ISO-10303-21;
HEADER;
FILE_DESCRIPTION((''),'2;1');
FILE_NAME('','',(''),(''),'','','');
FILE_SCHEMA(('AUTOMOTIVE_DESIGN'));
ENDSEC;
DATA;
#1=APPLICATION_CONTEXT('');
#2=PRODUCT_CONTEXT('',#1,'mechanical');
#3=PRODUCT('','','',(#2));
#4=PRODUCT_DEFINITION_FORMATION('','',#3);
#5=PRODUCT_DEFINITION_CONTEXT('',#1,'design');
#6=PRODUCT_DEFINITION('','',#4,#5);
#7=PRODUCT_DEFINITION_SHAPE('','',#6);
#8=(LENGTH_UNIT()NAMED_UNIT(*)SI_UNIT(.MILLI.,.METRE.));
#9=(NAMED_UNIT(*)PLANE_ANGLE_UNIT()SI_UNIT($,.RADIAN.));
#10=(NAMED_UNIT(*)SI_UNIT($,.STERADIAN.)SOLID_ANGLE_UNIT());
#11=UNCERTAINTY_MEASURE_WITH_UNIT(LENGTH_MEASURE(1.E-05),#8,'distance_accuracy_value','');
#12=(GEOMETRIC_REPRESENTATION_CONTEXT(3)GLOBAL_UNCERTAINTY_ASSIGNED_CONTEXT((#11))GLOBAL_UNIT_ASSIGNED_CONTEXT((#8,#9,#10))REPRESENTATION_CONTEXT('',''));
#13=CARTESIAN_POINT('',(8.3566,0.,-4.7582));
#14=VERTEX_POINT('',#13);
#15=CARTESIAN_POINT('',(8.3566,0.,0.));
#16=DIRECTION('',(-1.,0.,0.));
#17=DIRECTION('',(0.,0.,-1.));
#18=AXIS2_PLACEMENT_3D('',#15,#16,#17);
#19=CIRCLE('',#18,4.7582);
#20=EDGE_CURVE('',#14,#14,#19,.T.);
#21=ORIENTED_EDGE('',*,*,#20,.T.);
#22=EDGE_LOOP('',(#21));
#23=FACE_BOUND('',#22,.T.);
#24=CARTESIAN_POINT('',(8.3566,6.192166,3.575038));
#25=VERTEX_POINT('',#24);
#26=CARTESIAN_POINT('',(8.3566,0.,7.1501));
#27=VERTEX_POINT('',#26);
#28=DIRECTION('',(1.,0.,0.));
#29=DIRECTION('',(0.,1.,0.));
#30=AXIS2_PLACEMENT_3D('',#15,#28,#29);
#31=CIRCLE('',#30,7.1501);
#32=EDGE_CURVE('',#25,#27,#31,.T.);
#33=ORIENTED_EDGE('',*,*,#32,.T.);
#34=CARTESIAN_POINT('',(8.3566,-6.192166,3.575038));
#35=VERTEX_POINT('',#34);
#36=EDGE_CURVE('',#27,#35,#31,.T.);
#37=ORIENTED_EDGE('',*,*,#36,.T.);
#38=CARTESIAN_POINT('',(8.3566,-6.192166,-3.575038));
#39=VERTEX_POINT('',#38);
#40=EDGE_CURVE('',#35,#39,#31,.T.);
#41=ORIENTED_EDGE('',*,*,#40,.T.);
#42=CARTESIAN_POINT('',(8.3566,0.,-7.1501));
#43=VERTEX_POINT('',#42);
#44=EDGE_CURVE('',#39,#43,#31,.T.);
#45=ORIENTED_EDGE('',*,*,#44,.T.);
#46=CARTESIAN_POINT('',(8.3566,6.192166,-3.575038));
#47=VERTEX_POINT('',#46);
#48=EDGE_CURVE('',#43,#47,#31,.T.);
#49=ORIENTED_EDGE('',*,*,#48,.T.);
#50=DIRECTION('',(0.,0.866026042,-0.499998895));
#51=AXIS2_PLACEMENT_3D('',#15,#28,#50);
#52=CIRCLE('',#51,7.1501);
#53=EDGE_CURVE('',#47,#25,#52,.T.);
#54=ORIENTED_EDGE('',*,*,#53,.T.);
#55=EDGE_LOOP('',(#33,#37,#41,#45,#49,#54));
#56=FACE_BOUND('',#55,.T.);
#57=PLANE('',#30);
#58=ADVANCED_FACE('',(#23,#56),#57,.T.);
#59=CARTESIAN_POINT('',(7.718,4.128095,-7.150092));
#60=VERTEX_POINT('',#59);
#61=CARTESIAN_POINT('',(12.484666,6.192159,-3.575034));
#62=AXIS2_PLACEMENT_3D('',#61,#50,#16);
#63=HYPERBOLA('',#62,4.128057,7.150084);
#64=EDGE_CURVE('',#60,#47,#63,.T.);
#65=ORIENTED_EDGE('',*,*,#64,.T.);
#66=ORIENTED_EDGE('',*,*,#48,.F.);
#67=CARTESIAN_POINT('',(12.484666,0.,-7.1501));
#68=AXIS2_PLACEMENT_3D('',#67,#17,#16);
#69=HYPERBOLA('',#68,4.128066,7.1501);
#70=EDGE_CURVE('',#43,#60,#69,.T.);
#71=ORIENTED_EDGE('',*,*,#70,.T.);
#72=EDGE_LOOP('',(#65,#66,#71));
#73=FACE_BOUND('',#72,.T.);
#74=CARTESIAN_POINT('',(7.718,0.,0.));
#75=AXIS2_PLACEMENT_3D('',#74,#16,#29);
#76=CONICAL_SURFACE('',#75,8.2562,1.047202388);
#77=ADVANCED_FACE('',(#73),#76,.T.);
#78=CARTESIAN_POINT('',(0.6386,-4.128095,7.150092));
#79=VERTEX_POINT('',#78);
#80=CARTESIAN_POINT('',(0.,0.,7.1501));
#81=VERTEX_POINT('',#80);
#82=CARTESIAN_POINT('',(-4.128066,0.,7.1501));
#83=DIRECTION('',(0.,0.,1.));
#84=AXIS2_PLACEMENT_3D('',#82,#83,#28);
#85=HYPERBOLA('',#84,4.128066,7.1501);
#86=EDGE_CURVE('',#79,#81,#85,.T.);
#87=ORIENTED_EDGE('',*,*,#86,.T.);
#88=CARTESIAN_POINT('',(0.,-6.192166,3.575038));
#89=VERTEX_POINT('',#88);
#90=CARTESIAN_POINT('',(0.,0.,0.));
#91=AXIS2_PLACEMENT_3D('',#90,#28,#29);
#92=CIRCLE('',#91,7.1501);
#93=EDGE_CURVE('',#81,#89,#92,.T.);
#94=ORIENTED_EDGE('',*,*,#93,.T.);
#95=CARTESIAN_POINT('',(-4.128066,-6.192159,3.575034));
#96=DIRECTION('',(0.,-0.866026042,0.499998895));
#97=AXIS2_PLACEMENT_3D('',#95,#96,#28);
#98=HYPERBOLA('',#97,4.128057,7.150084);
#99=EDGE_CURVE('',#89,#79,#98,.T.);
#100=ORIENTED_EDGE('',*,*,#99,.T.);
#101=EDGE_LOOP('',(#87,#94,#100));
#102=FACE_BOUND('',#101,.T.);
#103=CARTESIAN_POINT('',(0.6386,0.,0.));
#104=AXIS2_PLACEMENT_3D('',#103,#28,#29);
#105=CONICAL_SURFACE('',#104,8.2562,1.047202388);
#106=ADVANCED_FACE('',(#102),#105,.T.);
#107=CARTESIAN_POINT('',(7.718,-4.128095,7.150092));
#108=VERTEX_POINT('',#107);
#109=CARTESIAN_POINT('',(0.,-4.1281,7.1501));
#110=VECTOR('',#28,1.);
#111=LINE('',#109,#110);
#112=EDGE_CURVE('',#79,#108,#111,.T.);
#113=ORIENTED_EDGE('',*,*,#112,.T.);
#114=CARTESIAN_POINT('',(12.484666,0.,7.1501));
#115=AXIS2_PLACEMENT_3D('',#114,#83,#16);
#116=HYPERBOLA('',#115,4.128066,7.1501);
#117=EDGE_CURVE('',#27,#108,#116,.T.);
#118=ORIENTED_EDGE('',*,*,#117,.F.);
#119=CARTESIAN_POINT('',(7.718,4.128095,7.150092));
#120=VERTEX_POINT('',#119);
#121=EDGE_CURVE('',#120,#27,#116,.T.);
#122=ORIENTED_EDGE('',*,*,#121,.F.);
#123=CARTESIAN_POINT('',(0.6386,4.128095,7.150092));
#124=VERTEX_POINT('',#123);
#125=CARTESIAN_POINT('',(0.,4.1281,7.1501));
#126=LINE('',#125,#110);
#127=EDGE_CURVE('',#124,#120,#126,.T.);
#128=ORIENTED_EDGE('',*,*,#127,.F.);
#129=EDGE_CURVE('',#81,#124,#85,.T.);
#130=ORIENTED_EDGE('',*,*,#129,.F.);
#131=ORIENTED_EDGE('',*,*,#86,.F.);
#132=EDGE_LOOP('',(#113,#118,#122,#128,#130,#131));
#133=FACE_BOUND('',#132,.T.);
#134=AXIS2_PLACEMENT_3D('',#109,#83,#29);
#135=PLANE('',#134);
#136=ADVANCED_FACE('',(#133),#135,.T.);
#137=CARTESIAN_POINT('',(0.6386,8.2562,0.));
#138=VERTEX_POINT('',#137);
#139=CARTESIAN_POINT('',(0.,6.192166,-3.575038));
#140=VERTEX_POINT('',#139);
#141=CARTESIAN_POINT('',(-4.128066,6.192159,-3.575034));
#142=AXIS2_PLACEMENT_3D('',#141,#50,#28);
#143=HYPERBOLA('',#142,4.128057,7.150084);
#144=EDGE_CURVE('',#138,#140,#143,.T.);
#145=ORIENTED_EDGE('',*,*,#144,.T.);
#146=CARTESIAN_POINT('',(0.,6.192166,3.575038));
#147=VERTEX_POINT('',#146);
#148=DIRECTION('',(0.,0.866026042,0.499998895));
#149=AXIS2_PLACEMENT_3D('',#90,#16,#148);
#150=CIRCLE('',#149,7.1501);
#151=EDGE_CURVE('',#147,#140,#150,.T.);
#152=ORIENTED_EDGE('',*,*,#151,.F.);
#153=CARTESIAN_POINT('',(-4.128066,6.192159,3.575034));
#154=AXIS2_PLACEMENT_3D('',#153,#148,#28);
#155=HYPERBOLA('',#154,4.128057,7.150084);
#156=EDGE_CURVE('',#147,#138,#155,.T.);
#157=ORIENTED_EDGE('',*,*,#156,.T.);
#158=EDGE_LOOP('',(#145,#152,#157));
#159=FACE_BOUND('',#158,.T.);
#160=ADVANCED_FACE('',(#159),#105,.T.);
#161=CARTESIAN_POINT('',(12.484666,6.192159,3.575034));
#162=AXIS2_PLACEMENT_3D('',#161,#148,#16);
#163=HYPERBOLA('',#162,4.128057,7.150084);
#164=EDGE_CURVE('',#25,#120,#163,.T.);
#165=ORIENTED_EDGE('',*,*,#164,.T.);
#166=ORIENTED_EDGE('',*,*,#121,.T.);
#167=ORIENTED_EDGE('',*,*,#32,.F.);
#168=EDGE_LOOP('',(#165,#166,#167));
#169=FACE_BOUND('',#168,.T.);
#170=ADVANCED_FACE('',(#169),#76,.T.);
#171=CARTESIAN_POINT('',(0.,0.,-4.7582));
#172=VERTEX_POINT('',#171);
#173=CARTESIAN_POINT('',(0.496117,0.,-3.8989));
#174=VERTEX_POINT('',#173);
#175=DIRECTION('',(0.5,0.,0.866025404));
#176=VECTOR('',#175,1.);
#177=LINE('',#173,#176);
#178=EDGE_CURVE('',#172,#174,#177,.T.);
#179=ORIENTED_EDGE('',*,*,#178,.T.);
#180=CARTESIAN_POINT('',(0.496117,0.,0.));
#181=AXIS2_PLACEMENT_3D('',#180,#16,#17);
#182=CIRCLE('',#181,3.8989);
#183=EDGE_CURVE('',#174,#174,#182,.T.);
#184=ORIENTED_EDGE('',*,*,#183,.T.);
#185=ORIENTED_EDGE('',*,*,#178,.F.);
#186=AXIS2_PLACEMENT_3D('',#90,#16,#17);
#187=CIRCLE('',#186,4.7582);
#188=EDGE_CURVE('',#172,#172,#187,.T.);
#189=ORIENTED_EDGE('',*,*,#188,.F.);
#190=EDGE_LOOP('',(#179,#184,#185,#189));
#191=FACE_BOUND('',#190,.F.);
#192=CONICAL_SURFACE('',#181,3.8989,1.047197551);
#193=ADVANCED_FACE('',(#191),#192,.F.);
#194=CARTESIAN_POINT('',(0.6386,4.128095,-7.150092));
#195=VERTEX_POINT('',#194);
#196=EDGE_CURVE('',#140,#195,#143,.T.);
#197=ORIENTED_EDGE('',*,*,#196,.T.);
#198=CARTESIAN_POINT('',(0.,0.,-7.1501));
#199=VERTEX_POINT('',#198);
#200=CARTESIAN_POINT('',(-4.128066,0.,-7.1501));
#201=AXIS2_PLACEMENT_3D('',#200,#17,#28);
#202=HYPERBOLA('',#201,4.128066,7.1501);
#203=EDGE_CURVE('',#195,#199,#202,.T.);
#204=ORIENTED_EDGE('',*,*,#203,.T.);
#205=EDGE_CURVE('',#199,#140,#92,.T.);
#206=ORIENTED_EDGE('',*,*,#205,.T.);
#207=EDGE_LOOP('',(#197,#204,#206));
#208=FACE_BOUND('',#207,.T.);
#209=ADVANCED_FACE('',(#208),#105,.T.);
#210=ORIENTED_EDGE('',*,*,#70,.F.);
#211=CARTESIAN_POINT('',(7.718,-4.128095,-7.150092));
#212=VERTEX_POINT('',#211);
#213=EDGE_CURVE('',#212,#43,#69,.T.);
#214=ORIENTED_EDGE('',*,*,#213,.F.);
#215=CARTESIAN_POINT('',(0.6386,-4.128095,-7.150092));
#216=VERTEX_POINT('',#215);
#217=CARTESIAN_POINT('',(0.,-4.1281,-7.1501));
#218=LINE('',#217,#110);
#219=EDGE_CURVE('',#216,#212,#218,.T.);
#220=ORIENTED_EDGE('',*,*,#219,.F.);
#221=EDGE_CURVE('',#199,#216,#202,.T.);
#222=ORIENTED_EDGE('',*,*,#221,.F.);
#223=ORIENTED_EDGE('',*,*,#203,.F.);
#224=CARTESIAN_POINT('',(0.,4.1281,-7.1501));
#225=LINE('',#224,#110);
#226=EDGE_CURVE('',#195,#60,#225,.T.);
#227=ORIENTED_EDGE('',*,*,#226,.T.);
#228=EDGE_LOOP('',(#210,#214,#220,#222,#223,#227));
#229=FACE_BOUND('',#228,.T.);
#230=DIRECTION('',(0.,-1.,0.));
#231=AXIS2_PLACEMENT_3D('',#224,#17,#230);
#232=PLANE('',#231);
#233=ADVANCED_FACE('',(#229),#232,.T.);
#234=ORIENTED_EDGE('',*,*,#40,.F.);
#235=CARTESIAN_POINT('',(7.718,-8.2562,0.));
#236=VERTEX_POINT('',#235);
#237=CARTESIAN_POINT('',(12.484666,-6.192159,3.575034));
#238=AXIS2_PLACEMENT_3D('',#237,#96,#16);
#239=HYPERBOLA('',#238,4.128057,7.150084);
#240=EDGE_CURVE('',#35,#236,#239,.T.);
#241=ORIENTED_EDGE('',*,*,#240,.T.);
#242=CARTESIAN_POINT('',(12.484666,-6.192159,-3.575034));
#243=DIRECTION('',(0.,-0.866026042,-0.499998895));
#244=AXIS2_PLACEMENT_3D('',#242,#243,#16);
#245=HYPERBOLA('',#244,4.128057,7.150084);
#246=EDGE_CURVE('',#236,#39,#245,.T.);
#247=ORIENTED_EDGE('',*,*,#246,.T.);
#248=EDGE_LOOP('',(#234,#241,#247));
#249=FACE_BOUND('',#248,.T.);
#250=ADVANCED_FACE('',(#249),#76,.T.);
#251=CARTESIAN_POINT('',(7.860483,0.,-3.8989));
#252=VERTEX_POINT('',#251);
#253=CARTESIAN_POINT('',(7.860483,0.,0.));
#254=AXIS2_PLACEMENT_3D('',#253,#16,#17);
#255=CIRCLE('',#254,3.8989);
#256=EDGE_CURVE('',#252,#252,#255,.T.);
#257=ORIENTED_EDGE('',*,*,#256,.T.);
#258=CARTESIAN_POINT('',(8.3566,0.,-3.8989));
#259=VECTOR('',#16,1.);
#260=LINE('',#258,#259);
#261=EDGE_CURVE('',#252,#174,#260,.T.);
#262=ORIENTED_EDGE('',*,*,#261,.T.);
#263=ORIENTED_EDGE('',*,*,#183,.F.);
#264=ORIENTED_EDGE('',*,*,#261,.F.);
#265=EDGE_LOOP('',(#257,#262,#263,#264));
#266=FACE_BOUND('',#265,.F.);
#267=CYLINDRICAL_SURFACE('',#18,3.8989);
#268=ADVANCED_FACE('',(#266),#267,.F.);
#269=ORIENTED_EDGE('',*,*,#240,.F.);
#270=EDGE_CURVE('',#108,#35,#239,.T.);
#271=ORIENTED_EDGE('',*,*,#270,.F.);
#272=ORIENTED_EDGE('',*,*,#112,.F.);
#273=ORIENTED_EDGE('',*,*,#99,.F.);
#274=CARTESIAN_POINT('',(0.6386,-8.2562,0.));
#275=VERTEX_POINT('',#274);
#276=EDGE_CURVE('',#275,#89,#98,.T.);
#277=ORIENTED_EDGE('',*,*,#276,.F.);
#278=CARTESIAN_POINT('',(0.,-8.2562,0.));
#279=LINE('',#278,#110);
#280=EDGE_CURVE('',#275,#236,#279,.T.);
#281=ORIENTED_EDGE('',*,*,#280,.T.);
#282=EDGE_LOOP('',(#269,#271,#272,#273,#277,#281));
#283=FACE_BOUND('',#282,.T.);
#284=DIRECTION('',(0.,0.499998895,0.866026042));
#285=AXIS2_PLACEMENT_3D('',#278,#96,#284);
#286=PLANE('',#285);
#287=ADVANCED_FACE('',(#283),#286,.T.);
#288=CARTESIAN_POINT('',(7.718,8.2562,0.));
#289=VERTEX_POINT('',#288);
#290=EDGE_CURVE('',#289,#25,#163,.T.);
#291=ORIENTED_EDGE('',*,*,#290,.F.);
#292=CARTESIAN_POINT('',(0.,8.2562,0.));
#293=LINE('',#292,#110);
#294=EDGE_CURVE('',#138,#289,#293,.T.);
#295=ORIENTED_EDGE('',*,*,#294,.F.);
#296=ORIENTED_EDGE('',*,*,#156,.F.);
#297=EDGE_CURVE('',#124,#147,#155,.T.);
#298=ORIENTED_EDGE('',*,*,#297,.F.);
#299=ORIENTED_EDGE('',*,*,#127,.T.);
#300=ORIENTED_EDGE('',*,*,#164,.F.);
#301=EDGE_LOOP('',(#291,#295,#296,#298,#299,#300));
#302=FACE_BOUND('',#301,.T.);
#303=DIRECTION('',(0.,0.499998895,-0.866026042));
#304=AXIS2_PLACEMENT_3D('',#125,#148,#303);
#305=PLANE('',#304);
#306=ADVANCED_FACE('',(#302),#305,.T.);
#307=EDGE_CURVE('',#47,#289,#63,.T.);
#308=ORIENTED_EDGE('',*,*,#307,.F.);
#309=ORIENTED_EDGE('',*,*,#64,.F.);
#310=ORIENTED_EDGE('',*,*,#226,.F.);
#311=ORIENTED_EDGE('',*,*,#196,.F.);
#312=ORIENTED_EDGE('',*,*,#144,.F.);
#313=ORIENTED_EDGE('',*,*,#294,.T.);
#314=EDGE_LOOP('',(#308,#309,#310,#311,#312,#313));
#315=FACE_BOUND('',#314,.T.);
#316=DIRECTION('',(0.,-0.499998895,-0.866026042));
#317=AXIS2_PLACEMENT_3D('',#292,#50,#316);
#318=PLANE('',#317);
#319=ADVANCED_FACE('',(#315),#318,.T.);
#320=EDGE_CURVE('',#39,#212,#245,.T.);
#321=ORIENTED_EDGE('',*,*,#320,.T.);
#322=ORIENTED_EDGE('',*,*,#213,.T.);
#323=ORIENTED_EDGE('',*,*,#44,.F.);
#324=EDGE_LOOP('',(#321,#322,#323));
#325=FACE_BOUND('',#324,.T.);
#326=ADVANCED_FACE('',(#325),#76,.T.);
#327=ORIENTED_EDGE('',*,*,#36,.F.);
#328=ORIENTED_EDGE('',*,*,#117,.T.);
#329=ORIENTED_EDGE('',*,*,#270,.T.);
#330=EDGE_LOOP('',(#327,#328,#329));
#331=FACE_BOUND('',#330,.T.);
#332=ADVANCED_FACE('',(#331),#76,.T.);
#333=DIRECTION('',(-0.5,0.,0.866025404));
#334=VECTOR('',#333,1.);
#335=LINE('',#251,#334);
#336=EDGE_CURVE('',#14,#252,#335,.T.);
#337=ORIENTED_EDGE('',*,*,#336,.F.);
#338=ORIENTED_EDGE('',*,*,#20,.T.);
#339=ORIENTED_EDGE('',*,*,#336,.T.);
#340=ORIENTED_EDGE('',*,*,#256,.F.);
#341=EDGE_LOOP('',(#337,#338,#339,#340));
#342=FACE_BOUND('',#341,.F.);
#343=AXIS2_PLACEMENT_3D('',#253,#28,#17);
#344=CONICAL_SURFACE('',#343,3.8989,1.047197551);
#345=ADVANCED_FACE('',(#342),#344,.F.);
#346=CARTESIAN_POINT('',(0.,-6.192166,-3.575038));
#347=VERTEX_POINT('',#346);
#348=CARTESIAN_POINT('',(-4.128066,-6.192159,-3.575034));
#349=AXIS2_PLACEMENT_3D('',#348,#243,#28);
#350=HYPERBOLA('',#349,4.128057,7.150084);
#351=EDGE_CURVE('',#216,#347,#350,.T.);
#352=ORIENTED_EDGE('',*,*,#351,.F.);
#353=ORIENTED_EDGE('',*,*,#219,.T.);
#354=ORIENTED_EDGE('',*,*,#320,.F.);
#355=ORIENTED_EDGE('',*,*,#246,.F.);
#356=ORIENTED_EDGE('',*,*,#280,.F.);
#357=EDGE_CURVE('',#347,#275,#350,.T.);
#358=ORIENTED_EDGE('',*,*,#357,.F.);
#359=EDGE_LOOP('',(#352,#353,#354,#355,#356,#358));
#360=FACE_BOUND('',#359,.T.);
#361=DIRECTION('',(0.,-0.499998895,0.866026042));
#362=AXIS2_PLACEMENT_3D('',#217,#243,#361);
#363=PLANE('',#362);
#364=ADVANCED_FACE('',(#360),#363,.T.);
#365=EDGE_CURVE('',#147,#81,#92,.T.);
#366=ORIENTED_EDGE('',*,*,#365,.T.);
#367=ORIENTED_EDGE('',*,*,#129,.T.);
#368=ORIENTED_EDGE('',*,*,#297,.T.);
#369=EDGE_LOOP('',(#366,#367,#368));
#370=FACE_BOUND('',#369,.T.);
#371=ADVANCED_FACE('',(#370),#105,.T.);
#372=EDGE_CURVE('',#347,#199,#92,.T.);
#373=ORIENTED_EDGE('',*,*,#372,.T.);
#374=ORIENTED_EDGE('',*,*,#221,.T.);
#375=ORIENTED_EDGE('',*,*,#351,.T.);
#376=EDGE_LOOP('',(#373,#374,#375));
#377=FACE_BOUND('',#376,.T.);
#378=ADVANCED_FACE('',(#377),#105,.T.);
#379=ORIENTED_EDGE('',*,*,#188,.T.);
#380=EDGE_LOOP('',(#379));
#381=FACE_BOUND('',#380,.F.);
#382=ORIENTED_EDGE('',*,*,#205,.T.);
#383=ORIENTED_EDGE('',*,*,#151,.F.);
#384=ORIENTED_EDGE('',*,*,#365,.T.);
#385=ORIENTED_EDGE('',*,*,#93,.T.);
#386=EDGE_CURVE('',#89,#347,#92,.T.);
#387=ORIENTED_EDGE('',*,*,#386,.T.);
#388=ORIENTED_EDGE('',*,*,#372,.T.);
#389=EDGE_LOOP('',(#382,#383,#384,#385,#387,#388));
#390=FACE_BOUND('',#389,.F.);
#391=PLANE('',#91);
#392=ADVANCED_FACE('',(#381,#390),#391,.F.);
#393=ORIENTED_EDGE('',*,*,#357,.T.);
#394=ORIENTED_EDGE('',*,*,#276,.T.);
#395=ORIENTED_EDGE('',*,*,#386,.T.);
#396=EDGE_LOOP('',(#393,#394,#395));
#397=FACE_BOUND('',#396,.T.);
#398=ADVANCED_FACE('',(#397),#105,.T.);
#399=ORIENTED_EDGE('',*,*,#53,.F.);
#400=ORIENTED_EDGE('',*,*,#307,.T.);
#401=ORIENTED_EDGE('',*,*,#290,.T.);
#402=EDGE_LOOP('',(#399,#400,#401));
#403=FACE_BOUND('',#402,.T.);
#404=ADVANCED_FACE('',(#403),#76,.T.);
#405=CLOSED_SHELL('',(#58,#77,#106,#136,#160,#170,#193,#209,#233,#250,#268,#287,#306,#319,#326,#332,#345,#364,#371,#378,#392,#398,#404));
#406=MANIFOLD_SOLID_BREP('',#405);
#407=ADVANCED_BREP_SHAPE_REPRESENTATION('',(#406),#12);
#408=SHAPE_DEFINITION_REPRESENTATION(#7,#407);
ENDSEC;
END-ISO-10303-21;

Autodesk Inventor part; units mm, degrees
ref_plane "YZ Plane" through (0, 0, 0) normal (1, 0, 0) x (0, 1, 0)
ref_plane "XZ Plane" through (0, 0, 0) normal (0, 1, 0) x (-1, 0, 0)
sketch "Boceto1" plane through (0, 0, 0) normal (1, 0, 0) x (0, 1, 0)
  line L0 (-8.2562, 0) -> (-4.1281, 7.1501)
  line L1 (-4.1281, 7.1501) -> (4.1281, 7.1501)
  line L2 (4.1281, 7.1501) -> (8.2562, 0)
  line L3 (8.2562, 0) -> (4.1281, -7.1501)
  line L4 (4.1281, -7.1501) -> (-4.1281, -7.1501)
  line L5 (-4.1281, -7.1501) -> (-8.2562, 0)
  point P0 (0, 0)
  point P1 (0, 0)
  dimension "d0" = 16.5125
extrude "Cuerpo" add sketch "Boceto1" along normal blind 8.3566
sketch "Boceto2" plane through (0, 0, 0) normal (0, 0, 1) x (1, 0, 0)
  line L0 (0, 4.1281) -> (0, 8.2562) projected
  line L1 (0, 8.2562) -> (8.3566, 8.2562) projected
  line L2 (8.3566, 4.1281) -> (8.3566, 8.2562) projected
  line L3 (-1.6713, 0) -> (10.0279, 0) projected
  line L4 (0.6386, 8.2562) -> (0, 7.1501)
  line L5 (7.718, 8.2562) -> (8.3566, 7.1501)
  dimension "d3" = 30
  dimension "d4" = 30
  dimension "d5" = 14.3002
  dimension "d6" = 14.3002
revolve "Chaflán1" cut sketch "Boceto2" angle 360 about axis through (-10, 0, 0) along (1, 0, 0)
sketch "Boceto3" plane through (8.3566, 0, 0) normal (1, 0, 0) x (0, 0, -1)
  arc A0 (-3.5751, -6.1922) -> (3.575, -6.1922) centre (0, 0) ccw projected
hole "Rosca" at (8.3566, 0, 0) direction (-1, 0, 0) diameter 7.7978 end through all thread size "3/8-16 UNC" class "2B" standard "ANSI Unified Screw Threads"
chamfer "Chaflán2" distance 0.8593 angle 30 1 edges at (8.3566, 0, 3.8989) measured on face at (8.3566, -6.0308, -0.1567)
chamfer "Chaflán3" distance 0.8593 angle 30 1 edges at (0, 0, 3.8989) measured on face at (0, -6.0308, -0.1567)
ref_plane "Work Plane1" through (-15.0312, 0, 0) normal (0, -0.8660254, -0.5) x (1, 0, 0)
equation "\"d0\" = 1.1547 * SW"
equation "\"d1\" = KOH"
equation "\"d8\" = -0.5 * GD1 + 0.5 * NND"
equation "\"d40\" = -0.5 * GD1 + 0.5 * NND"
equation "\"d10\" = -0.5 * GD1 + 0.5 * NND"
equation "\"d41\" = -0.5 * GD1 + 0.5 * NND"
equation "\"d3\" = ANG1"
equation "\"d4\" = ANG2"
equation "\"d5\" = SW0"
equation "\"d6\" = SW01"
equation "\"ANG1\" = 30deg"
equation "\"ANG2\" = 30deg"
equation "\"NND\" = 9.525"
equation "\"KOH\" = 8.3566"
equation "\"SW\" = 14.3002"
equation "\"SW0\" = SW"
equation "\"SW01\" = SW"
equation "\"THREADDIA\" = 9.525"
equation "\"TOA\" = 30deg"
equation "\"E0\" = 1.155 * SW"
equation "\"GD1\" = 7.806481"
properties part number "ANSI B18.2.2 - 3/8 - 16, HNI" material "Acero, suave"
